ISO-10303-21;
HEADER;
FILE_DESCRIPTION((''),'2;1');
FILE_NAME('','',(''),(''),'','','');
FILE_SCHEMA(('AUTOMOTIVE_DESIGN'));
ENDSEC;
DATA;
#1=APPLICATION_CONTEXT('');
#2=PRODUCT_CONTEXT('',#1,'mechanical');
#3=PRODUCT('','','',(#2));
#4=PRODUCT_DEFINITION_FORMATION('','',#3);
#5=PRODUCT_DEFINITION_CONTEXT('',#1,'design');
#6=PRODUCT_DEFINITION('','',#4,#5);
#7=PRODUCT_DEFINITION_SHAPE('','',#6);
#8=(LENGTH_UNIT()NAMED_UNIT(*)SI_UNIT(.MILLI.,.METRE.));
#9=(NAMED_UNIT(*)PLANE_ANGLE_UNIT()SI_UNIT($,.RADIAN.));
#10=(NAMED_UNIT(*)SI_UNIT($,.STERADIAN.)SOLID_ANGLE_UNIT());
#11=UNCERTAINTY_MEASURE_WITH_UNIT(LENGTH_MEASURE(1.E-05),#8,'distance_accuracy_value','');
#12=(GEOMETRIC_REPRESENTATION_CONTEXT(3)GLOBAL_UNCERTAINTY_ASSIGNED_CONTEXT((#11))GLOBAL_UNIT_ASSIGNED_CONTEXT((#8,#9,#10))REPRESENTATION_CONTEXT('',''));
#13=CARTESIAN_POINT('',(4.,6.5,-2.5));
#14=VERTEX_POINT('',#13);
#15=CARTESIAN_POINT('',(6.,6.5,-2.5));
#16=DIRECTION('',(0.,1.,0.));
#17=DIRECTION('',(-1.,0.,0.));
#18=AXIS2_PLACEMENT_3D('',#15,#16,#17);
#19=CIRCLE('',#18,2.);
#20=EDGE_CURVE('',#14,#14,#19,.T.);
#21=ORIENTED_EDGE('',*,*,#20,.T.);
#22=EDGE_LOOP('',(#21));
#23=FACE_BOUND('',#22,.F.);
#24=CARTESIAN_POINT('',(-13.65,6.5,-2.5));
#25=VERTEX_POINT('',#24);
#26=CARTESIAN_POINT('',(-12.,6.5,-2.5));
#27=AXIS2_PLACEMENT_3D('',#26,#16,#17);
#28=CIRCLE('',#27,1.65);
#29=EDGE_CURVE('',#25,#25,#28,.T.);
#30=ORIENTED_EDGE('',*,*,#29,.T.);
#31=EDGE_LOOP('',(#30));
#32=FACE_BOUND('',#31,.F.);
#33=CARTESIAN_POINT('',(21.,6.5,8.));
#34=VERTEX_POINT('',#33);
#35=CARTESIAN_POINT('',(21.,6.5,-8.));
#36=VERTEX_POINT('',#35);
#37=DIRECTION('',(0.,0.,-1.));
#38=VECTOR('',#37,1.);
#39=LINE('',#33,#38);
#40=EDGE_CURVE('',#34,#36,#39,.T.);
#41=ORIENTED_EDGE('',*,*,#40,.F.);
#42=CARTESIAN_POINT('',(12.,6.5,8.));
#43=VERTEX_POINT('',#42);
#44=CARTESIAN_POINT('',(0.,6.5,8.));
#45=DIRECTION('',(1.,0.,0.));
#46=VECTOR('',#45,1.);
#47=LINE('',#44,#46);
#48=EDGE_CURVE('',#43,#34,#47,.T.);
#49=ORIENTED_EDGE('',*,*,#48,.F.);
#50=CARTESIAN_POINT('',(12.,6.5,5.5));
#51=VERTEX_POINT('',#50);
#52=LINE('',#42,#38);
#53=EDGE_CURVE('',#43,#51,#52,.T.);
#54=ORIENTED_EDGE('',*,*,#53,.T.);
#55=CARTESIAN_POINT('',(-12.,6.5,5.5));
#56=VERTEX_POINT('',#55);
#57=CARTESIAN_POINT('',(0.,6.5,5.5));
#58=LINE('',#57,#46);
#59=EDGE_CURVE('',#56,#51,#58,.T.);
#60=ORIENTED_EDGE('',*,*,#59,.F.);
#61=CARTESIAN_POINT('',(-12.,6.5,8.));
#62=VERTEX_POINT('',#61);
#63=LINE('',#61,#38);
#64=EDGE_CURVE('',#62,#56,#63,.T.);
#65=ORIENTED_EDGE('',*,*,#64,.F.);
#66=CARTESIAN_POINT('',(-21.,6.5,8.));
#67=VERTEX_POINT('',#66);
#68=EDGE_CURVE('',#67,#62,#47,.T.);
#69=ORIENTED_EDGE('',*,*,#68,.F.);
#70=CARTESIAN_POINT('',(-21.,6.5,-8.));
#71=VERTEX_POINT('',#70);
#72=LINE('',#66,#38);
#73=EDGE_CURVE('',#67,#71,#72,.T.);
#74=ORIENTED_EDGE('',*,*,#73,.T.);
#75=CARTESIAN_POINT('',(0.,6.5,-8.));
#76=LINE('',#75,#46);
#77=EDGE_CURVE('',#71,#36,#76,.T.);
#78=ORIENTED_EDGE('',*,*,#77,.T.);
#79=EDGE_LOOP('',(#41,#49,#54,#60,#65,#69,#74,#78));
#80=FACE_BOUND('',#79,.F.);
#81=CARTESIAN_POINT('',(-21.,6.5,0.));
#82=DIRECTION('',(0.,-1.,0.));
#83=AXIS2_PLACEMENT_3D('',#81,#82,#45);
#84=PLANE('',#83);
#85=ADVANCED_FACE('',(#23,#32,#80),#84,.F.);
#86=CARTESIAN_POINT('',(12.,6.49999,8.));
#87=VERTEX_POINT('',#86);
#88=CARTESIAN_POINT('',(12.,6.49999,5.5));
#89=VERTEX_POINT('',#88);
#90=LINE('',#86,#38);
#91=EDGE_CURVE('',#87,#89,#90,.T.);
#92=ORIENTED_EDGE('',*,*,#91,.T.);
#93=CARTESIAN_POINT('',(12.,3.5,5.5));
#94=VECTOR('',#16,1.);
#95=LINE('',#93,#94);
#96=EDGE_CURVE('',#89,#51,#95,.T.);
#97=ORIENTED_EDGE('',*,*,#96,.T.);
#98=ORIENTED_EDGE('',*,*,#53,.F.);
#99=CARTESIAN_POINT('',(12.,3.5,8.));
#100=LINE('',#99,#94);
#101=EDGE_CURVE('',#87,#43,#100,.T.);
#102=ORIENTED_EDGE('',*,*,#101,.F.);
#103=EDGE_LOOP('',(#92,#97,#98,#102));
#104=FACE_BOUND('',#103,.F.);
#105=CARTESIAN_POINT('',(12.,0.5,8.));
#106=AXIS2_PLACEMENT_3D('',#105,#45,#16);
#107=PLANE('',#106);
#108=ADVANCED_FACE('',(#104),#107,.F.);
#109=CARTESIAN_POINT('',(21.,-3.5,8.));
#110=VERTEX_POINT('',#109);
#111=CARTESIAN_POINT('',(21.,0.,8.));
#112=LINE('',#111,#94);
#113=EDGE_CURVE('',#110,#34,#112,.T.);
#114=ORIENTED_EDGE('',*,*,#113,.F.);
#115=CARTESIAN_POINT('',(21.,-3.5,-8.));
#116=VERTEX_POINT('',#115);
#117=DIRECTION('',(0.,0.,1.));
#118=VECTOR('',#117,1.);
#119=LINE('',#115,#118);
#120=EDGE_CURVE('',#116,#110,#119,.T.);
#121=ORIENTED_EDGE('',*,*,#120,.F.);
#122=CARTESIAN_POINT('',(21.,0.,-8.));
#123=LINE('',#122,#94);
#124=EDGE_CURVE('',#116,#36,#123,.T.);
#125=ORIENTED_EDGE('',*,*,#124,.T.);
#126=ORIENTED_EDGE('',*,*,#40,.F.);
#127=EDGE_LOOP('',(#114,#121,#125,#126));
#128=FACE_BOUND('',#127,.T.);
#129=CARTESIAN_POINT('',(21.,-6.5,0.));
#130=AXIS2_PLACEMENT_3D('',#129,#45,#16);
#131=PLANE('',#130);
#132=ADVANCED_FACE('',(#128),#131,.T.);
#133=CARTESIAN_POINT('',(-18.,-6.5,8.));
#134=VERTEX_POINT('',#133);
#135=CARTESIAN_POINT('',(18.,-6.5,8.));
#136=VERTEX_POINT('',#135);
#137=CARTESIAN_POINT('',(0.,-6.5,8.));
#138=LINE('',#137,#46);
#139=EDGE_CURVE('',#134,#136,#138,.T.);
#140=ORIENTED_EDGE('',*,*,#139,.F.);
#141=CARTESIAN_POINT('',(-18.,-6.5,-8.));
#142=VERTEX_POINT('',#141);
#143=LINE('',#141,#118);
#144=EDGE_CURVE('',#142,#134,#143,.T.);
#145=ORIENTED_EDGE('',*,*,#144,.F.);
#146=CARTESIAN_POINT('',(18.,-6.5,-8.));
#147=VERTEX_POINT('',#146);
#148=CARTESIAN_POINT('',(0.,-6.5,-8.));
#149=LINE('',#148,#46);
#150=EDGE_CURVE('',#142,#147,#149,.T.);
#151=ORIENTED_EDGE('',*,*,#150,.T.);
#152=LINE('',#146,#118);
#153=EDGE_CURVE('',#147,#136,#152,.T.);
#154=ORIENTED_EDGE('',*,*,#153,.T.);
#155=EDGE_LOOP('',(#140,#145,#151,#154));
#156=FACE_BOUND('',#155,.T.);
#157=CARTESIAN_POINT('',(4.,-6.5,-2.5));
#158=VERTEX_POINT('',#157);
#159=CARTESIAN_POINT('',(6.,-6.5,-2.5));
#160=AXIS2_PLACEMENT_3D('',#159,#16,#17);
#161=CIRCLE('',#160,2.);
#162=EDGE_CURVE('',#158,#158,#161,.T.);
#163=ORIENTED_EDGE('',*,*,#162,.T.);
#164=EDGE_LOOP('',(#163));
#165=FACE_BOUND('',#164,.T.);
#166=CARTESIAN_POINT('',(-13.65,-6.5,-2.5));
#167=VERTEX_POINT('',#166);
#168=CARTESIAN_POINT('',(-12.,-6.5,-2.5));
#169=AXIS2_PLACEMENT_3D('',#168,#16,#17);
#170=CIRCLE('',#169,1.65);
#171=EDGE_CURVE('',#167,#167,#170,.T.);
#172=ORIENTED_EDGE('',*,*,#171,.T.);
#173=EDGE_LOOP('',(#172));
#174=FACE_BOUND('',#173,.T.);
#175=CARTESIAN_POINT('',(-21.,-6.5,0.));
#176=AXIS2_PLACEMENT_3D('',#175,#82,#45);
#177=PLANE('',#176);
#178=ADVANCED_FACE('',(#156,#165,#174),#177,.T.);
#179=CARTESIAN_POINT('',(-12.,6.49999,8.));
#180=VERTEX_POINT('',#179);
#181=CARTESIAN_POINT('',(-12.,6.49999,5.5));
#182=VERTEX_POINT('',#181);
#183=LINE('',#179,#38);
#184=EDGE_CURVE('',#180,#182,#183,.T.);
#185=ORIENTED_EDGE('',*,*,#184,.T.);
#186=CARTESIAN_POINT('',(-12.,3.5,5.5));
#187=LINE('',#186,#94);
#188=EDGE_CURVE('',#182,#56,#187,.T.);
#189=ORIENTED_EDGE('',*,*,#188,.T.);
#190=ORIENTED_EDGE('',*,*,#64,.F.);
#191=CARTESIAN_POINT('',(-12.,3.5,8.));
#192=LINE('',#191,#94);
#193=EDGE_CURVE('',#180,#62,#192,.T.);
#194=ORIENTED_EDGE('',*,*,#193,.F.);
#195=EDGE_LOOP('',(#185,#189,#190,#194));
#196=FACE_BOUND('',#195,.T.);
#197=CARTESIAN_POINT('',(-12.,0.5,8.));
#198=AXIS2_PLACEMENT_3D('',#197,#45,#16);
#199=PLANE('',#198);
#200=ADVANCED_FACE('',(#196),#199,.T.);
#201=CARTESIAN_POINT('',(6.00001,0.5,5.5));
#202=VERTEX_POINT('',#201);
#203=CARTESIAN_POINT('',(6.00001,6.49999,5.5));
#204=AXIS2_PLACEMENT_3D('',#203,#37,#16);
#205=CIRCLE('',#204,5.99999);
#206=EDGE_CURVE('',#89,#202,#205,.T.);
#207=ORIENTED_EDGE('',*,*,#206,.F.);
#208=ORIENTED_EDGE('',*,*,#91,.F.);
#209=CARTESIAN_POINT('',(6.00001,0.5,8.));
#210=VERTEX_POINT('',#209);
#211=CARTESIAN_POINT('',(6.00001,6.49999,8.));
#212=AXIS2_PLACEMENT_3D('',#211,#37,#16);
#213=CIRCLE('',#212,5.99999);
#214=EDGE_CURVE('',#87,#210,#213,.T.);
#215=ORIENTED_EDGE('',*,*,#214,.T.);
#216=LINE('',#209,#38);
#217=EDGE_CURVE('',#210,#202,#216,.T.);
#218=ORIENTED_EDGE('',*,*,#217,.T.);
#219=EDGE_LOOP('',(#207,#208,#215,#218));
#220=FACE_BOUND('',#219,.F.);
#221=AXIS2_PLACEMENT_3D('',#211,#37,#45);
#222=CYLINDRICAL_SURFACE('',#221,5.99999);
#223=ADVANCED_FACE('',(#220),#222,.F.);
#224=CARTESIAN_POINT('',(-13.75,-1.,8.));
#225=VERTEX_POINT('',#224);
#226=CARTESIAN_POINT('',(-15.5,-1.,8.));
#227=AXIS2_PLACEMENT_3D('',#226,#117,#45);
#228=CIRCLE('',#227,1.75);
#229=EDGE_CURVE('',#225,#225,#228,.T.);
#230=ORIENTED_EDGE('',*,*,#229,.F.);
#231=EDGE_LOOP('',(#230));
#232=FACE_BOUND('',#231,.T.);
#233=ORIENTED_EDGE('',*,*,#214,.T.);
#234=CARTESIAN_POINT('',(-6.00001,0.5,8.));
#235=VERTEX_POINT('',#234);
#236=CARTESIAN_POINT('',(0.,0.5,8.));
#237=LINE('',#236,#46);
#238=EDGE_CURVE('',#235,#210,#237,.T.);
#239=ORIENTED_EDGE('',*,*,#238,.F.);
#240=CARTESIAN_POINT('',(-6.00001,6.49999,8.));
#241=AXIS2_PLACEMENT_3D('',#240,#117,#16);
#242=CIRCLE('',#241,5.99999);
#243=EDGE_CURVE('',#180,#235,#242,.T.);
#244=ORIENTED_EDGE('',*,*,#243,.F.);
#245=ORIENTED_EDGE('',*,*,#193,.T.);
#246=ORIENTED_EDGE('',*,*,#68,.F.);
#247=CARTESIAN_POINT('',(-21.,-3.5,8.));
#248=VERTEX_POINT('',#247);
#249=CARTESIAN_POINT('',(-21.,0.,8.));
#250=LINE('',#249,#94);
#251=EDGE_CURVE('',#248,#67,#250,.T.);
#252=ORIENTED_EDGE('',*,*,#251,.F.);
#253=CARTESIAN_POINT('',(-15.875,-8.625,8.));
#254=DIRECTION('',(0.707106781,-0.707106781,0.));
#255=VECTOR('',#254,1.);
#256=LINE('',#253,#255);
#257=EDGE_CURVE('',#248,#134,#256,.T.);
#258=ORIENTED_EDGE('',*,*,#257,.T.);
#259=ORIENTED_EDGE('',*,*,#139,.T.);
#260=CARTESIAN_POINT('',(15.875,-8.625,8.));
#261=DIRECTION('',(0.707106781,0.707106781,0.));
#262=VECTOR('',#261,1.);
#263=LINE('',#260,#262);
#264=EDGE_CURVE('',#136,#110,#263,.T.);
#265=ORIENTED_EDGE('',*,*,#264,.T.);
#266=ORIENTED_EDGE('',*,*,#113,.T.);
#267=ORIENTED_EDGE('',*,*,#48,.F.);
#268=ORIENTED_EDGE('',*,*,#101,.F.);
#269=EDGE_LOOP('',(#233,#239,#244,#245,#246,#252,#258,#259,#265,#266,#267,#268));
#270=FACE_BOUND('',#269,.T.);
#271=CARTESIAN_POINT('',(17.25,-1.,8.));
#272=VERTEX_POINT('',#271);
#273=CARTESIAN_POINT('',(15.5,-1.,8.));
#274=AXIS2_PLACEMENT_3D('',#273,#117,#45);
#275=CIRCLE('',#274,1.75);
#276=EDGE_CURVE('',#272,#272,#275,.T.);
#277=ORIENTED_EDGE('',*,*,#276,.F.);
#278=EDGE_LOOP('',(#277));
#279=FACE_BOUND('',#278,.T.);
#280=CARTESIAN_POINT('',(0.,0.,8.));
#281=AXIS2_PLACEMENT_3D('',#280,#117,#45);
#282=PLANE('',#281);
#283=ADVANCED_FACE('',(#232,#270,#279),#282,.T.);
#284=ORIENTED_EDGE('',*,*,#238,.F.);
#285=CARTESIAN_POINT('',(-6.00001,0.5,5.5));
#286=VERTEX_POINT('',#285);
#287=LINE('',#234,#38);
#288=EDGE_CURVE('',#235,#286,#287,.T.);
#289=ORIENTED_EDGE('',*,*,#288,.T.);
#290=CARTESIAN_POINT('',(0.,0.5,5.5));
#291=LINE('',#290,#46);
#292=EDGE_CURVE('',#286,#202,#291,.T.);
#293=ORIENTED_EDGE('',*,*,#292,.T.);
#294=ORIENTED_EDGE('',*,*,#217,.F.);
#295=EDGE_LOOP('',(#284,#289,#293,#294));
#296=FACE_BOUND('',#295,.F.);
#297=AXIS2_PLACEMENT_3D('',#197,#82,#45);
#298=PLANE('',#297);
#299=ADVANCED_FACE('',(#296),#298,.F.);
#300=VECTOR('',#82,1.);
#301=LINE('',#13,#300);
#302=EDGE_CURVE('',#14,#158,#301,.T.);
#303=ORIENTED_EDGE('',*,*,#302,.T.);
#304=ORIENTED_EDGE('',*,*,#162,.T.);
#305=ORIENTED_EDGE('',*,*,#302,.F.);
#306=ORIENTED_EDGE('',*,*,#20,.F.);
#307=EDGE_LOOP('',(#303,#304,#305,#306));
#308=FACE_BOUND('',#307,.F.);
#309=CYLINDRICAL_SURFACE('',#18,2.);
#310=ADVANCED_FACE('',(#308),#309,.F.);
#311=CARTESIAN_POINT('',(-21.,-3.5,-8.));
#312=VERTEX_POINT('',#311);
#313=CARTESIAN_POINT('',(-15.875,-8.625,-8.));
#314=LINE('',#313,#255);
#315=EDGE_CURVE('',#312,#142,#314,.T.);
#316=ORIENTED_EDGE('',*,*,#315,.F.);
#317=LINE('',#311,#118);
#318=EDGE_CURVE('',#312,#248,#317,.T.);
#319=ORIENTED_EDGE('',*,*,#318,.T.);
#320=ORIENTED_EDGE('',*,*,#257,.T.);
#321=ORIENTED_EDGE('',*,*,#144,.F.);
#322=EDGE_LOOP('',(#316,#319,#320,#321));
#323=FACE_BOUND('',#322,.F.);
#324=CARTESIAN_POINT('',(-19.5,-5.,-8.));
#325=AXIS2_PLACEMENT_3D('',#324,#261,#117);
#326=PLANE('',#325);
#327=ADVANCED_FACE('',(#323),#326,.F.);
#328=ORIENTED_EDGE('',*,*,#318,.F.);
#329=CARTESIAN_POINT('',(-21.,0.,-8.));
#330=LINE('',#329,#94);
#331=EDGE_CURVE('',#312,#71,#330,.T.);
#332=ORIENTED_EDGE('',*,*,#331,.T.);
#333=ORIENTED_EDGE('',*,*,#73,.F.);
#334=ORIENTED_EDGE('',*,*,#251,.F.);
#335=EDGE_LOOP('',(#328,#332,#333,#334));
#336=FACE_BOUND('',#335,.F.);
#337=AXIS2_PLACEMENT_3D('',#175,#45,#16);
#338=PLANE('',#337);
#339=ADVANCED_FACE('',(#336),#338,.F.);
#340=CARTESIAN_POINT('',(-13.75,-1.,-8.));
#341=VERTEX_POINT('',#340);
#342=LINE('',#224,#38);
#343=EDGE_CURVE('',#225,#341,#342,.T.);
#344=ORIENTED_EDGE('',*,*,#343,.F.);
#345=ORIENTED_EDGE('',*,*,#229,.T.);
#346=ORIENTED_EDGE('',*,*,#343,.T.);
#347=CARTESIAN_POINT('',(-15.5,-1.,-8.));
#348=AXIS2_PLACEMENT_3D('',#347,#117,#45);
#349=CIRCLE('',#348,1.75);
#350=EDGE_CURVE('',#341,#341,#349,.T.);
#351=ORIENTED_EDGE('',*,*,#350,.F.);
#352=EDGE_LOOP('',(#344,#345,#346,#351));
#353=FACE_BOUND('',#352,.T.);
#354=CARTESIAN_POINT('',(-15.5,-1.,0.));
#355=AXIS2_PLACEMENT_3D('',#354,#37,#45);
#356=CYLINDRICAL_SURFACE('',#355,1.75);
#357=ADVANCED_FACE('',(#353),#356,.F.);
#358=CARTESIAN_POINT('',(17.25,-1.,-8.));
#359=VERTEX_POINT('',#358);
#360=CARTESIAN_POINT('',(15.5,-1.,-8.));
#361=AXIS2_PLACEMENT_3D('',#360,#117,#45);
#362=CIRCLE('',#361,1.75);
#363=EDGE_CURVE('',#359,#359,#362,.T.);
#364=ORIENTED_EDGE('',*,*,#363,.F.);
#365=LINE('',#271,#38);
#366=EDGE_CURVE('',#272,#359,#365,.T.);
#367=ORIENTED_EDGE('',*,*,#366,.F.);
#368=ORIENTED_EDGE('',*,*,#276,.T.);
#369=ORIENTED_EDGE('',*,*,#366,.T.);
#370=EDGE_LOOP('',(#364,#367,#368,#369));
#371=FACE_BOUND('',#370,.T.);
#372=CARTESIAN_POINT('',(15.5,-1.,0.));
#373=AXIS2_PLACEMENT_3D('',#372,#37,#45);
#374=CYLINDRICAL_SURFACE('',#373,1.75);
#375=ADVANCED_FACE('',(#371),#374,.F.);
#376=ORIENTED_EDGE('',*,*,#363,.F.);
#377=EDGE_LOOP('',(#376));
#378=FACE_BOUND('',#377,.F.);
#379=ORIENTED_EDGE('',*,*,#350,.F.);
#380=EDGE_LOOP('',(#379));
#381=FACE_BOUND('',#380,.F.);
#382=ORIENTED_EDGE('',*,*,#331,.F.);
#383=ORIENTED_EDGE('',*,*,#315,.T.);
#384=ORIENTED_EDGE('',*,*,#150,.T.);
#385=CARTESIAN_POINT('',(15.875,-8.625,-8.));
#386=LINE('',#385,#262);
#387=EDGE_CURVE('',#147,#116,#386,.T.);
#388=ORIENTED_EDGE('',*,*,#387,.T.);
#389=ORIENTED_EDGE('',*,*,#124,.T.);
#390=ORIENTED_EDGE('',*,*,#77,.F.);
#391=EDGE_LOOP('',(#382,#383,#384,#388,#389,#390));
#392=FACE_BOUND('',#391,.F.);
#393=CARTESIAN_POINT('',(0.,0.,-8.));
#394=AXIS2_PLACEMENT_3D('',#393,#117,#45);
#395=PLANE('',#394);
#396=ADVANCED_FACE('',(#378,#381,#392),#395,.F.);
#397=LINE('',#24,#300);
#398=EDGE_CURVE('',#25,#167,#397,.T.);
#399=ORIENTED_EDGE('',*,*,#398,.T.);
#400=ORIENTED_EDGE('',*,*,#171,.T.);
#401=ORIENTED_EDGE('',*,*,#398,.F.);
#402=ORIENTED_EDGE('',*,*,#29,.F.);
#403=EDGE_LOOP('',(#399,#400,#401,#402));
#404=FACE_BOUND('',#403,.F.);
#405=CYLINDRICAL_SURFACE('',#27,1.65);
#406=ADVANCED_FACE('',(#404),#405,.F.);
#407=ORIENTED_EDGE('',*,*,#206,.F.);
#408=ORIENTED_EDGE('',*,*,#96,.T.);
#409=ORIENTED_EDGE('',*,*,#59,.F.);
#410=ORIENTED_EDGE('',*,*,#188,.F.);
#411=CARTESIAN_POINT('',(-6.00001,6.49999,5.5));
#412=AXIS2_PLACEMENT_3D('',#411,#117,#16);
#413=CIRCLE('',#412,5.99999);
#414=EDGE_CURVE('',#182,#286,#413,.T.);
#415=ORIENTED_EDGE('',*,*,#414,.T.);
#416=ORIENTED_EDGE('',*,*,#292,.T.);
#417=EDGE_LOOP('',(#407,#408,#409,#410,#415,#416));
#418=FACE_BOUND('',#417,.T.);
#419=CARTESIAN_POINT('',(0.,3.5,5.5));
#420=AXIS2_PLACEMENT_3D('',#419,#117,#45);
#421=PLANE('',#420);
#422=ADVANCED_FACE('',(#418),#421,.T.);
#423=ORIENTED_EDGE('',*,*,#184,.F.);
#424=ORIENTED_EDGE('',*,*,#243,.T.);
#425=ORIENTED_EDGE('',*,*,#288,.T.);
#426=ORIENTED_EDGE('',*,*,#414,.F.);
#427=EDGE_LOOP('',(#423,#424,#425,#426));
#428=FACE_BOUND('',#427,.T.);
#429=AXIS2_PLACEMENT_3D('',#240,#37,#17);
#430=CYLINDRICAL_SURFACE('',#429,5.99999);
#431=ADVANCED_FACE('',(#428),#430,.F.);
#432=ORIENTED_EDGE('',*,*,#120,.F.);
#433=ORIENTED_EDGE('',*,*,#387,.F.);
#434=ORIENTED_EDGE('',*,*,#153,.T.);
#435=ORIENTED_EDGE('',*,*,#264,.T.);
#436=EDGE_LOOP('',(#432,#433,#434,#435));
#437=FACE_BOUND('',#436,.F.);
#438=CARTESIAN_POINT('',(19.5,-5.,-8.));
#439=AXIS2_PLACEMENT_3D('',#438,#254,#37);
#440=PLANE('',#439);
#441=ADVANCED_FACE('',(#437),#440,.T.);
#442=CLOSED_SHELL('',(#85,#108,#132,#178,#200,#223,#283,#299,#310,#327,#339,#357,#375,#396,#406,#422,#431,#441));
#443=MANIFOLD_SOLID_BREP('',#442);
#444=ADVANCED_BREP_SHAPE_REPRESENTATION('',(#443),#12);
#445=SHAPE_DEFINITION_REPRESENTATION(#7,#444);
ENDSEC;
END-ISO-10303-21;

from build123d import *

# Parameters (mm, degrees)
F0_W     = 42
F0_H     = 13
F0_R     = 1.75
F1_DEPTH = 8
F2_W     = 24
F2_H     = 6
F3_DEPTH = 2.5
F4_R     = 5.99999
F5_SIZE  = 3
F6_R     = 1.65
F6_R_2   = 2
F7_DEPTH = 13.001


# Not quite as in the source:
# - a fillet or chamfer is up to 0.001 mm smaller than in the source, because OpenCascade refuses the exact size


with BuildPart() as f1:
    # F0 (on Top) → F1 (new body, symmetric)
    with BuildSketch(Plane.XY):
        Rectangle(F0_W, F0_H)
        with Locations((-15.5, -1)):
            Circle(F0_R, mode=Mode.SUBTRACT)
        with Locations((15.5, -1)):
            Circle(F0_R, mode=Mode.SUBTRACT)
    extrude(amount=F1_DEPTH, both=True)

    # F2 (on face) → F3 (cut)
    with BuildSketch(Plane.XY.offset(8)):
        with Locations((0, 3.5)):
            Rectangle(F2_W, F2_H)
    extrude(amount=-F3_DEPTH, mode=Mode.SUBTRACT)

    # F4 (radius 6 in the source; OpenCascade refuses exactly that, so slightly less here)
    f4_edges = [f1.edges().sort_by_distance(p)[0] for p in [
        (-12, 0.5, 6.75),
        (12, 0.5, 6.75),
    ]]
    fillet(f4_edges, radius=F4_R)

    # F5
    f5_edges = [f1.edges().sort_by_distance(p)[0] for p in [
        (-21, -6.5, 0),
        (21, -6.5, 0),
    ]]
    chamfer(f5_edges, length=F5_SIZE)

    # F6 (on face) → F7 (cut, through all)
    with BuildSketch(Plane(origin=(0, 6.5, 0), x_dir=(-1, 0, 0), z_dir=(0, 1, 0))):
        with Locations((12, -2.5)):
            Circle(F6_R)
        with Locations((-6, -2.5)):
            Circle(F6_R_2)
    extrude(amount=-F7_DEPTH, mode=Mode.SUBTRACT)


solid = f1.part
